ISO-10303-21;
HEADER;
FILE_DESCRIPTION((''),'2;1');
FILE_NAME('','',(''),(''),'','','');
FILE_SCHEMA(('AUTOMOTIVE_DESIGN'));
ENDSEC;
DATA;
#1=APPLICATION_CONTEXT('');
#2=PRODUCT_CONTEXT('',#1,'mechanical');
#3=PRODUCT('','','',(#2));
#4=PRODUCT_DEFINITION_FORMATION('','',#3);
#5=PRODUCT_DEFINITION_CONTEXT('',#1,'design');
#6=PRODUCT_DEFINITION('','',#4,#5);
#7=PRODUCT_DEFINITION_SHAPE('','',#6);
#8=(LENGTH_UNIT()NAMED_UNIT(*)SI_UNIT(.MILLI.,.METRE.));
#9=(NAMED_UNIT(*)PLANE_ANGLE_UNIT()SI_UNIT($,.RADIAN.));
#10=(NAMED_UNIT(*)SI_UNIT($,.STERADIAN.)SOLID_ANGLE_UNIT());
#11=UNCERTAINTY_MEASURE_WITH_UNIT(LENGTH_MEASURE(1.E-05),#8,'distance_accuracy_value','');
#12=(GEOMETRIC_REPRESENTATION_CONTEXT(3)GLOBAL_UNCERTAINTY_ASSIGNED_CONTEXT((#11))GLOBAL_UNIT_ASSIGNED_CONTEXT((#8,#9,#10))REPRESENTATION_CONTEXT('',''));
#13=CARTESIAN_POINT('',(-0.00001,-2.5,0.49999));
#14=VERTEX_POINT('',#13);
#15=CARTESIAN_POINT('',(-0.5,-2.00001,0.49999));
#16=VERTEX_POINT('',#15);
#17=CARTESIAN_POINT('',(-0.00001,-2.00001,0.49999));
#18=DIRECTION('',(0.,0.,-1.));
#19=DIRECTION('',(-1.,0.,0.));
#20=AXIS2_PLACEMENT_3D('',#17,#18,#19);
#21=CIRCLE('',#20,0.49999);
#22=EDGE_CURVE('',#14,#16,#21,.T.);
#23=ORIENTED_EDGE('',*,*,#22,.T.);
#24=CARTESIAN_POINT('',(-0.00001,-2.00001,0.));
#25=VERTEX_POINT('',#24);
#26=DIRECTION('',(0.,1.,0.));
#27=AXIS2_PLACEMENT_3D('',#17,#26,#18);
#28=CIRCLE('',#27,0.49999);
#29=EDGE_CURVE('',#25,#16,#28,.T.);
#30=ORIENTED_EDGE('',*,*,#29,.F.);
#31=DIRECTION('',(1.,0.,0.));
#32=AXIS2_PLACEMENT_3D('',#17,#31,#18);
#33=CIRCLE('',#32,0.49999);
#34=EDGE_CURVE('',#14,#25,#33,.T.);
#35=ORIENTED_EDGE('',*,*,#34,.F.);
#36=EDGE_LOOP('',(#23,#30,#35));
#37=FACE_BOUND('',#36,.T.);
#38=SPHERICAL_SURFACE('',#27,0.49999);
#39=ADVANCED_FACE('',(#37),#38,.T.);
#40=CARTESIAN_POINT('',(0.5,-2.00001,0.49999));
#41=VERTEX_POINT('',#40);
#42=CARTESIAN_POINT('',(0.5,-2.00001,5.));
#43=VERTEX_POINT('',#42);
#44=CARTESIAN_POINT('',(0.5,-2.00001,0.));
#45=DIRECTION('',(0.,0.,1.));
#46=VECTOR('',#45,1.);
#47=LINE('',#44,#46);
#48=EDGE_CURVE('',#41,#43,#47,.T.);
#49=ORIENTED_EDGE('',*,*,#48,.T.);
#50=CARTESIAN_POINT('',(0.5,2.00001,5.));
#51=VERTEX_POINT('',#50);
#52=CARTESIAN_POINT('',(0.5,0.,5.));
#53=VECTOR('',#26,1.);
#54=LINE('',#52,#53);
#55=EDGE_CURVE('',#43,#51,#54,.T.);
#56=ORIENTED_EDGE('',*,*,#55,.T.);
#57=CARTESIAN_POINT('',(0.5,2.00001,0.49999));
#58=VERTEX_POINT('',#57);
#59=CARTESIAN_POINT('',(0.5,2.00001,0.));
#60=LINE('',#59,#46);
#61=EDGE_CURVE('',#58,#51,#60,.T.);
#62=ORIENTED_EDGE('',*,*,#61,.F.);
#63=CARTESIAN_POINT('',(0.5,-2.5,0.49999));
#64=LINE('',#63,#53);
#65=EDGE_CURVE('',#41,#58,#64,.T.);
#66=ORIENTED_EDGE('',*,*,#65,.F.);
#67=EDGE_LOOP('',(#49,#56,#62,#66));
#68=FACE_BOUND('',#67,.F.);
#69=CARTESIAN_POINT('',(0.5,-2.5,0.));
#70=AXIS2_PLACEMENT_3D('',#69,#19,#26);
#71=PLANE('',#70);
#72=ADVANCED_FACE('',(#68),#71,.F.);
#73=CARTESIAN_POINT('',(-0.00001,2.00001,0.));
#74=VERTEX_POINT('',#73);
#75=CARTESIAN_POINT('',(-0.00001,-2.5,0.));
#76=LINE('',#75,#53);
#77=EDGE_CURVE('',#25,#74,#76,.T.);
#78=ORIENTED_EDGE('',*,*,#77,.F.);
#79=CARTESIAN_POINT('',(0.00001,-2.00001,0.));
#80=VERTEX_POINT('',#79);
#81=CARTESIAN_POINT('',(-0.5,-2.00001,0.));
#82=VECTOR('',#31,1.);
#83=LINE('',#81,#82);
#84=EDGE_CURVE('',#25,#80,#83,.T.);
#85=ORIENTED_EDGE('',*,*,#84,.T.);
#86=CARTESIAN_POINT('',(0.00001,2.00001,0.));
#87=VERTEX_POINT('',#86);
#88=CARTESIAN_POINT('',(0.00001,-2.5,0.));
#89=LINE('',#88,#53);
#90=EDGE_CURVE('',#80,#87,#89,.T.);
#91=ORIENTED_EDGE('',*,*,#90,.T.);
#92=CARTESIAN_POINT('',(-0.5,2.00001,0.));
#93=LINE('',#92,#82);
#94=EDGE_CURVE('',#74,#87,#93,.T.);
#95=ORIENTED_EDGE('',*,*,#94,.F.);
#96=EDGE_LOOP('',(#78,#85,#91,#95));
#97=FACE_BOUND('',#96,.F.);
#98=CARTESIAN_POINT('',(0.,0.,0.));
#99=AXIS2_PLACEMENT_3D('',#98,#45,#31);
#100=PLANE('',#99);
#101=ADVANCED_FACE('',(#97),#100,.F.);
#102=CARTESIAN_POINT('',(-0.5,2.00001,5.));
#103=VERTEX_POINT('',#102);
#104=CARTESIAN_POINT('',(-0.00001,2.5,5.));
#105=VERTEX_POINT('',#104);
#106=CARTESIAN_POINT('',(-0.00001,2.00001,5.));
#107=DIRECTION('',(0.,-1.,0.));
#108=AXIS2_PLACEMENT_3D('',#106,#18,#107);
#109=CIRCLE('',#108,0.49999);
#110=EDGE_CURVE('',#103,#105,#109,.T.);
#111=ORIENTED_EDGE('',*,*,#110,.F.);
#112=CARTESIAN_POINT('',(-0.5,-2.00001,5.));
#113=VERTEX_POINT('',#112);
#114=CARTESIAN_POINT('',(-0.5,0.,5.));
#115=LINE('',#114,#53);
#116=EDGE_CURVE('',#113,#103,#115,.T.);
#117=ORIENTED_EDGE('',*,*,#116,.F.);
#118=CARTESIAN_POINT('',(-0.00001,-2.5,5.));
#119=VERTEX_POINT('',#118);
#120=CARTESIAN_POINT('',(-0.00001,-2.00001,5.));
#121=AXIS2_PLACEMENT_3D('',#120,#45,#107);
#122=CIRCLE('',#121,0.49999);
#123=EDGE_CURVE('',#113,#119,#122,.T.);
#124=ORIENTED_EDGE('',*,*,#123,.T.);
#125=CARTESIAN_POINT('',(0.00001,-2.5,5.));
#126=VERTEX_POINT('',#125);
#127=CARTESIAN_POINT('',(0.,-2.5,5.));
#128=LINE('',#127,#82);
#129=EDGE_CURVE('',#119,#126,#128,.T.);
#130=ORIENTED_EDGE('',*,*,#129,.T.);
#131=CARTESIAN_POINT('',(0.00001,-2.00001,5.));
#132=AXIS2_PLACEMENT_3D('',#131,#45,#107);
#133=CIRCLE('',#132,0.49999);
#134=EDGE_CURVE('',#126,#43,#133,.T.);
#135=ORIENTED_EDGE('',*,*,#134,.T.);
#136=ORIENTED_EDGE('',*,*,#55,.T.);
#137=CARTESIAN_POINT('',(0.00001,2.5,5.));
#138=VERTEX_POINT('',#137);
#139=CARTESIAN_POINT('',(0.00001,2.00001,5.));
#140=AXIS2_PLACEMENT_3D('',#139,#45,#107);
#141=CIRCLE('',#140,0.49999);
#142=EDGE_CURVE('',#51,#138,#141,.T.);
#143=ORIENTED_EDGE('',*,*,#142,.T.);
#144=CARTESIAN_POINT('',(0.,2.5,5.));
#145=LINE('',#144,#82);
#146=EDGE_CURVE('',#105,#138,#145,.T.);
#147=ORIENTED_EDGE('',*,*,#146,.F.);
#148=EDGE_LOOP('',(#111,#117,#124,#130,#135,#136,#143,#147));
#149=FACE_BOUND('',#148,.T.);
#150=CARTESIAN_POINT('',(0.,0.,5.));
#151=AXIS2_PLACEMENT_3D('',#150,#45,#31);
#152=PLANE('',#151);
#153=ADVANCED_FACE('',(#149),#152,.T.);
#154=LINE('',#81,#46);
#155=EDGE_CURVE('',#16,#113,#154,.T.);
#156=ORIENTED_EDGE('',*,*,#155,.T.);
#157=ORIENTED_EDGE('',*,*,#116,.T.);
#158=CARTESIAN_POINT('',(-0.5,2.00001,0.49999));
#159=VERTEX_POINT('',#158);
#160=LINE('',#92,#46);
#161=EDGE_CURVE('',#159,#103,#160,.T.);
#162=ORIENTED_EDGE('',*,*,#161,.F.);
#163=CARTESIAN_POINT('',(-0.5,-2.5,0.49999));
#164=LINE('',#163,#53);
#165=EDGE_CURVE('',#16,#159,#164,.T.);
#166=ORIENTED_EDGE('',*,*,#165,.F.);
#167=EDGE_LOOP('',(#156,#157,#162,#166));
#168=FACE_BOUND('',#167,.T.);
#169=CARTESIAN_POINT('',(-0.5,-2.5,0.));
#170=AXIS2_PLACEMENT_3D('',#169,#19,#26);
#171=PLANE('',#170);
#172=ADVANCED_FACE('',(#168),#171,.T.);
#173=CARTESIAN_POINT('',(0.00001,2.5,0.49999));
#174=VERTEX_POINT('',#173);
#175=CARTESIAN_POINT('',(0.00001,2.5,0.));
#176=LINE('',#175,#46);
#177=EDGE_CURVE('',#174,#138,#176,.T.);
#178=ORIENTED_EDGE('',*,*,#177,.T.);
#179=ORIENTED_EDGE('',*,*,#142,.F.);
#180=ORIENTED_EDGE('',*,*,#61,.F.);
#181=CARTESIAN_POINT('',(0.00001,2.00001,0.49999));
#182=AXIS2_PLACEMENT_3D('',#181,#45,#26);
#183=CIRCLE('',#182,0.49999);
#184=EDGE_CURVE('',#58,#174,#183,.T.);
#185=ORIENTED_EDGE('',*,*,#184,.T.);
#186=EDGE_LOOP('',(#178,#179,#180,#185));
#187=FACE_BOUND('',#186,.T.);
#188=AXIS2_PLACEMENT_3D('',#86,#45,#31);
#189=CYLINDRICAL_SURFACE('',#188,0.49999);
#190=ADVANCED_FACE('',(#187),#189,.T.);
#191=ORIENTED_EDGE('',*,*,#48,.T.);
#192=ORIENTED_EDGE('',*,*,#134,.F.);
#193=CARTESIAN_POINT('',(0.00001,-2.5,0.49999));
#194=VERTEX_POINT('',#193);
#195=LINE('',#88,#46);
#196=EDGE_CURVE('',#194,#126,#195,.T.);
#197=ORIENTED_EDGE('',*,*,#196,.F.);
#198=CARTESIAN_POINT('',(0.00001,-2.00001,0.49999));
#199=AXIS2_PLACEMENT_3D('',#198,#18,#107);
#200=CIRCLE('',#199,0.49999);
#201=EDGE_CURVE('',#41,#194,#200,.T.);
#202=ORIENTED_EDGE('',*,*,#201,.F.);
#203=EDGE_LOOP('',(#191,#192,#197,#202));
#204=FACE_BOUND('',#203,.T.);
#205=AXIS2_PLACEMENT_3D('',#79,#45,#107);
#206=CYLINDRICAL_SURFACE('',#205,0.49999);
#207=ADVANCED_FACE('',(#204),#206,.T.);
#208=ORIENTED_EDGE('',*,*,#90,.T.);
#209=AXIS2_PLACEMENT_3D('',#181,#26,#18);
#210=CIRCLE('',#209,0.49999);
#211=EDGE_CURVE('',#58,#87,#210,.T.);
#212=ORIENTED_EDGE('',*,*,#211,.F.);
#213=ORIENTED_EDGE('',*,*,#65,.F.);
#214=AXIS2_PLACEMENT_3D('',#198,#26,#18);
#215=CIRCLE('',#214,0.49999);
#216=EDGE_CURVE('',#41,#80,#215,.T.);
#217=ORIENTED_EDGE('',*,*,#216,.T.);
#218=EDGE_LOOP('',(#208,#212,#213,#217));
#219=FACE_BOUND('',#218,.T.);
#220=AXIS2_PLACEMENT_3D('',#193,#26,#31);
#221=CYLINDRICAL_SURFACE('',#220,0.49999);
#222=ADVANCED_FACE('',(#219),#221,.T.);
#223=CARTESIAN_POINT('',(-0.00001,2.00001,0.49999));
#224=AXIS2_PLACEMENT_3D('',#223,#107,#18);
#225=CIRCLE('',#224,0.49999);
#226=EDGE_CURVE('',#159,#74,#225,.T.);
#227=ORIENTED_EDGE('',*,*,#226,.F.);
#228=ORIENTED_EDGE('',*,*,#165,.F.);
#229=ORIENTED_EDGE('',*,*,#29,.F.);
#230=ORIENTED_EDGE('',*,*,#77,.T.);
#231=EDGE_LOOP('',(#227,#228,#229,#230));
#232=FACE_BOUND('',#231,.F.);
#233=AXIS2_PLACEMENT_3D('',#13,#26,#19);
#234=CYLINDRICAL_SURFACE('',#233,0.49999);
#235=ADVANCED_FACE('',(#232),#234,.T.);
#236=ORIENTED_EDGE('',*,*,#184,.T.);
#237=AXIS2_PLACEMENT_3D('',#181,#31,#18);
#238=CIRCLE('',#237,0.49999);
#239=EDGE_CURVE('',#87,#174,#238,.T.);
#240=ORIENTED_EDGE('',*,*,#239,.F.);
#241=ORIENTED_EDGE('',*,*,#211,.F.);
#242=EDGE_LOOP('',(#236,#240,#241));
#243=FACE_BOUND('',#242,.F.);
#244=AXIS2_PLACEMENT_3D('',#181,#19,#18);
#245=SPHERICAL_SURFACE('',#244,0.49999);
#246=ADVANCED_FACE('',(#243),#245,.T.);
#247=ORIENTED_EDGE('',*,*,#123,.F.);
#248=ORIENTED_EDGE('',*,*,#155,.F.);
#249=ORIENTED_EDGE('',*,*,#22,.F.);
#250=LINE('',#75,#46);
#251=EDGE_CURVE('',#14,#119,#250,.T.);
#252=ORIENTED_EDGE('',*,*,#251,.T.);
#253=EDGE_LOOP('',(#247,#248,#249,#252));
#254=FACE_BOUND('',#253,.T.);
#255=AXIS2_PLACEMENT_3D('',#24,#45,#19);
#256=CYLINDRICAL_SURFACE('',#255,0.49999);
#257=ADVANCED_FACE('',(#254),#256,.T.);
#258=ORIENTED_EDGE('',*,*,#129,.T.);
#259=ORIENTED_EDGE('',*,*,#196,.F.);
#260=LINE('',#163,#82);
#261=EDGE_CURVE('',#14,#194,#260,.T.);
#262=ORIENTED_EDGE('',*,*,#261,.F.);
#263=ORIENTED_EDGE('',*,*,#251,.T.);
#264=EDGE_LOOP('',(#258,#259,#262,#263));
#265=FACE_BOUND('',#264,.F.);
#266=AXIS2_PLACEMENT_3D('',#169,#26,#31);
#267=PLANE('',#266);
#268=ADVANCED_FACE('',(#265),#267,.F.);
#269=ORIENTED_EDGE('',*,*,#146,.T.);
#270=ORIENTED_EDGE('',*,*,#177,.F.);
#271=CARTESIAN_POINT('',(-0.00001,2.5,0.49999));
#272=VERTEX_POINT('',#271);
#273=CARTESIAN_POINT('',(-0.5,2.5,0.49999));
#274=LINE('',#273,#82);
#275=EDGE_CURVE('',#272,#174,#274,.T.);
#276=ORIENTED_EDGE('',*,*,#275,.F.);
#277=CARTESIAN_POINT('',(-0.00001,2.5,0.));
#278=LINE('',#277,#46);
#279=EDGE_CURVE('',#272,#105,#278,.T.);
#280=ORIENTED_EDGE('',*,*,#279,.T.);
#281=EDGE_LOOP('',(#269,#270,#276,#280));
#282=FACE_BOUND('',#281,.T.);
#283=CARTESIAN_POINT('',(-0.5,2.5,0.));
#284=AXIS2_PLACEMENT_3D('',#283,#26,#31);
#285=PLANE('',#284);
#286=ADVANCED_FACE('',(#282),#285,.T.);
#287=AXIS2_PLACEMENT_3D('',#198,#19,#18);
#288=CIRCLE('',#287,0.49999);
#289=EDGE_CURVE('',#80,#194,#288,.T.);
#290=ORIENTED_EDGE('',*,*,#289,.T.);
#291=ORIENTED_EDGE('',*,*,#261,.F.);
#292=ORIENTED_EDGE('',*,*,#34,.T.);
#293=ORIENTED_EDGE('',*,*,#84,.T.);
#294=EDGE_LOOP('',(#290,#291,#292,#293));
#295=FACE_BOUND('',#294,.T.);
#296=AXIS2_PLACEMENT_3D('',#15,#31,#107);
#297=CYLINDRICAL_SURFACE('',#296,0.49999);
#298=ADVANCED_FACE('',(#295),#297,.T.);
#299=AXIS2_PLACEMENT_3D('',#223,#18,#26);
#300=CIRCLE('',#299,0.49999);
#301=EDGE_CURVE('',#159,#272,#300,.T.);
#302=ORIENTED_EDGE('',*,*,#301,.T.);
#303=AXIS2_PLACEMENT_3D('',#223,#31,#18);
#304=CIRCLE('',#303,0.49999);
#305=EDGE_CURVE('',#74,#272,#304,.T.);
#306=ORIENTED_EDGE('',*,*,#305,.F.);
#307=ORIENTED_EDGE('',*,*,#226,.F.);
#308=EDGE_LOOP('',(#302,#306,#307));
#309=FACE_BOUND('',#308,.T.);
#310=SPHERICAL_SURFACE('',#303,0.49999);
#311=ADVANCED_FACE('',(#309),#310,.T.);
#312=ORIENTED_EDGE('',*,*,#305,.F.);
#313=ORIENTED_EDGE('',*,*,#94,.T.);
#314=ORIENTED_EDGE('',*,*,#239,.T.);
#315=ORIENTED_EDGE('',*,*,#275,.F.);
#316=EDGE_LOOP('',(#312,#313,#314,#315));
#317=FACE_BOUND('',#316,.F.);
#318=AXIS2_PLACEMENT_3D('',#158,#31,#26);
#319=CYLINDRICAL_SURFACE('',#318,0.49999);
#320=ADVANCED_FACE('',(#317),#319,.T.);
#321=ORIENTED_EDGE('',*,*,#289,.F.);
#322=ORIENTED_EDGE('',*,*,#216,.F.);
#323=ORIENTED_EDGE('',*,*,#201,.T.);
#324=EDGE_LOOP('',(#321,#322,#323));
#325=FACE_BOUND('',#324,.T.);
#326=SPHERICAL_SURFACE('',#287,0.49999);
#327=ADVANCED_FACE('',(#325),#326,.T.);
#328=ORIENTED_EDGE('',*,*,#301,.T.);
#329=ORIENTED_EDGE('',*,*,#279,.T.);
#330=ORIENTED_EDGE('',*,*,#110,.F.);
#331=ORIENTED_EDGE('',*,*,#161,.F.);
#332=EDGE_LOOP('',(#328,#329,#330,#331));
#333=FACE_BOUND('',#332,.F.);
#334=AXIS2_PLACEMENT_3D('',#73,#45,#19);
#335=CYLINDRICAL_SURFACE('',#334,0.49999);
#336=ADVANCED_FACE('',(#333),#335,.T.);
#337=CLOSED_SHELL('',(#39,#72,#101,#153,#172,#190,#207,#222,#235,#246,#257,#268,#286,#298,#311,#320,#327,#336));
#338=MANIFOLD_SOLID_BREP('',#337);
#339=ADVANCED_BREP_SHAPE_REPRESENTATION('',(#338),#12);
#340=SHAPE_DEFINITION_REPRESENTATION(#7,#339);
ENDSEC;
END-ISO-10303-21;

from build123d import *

# Parameters (mm, degrees)
F0_W     = 1
F0_H     = 5
F1_DEPTH = 5
F2_R     = 0.49999


# Not quite as in the source:
# - a fillet or chamfer is up to 0.001 mm smaller than in the source, because OpenCascade refuses the exact size


with BuildPart() as f1:
    # F0 (on Top) → F1 (new body)
    with BuildSketch(Plane.XY):
        Rectangle(F0_W, F0_H)
    extrude(amount=F1_DEPTH)

    # F2 (radius 0.5 in the source; OpenCascade refuses exactly that, so slightly less here)
    f2_edges = [f1.edges().sort_by_distance(p)[0] for p in [
        (0, 2.5, 0),
        (-0.5, 0, 0),
        (0, -2.5, 0),
        (0.5, 0, 0),
        (0.5, 2.5, 2.5),
        (-0.5, 2.5, 2.5),
        (-0.5, -2.5, 2.5),
        (0.5, -2.5, 2.5),
    ]]
    fillet(f2_edges, radius=F2_R)


solid = f1.part
